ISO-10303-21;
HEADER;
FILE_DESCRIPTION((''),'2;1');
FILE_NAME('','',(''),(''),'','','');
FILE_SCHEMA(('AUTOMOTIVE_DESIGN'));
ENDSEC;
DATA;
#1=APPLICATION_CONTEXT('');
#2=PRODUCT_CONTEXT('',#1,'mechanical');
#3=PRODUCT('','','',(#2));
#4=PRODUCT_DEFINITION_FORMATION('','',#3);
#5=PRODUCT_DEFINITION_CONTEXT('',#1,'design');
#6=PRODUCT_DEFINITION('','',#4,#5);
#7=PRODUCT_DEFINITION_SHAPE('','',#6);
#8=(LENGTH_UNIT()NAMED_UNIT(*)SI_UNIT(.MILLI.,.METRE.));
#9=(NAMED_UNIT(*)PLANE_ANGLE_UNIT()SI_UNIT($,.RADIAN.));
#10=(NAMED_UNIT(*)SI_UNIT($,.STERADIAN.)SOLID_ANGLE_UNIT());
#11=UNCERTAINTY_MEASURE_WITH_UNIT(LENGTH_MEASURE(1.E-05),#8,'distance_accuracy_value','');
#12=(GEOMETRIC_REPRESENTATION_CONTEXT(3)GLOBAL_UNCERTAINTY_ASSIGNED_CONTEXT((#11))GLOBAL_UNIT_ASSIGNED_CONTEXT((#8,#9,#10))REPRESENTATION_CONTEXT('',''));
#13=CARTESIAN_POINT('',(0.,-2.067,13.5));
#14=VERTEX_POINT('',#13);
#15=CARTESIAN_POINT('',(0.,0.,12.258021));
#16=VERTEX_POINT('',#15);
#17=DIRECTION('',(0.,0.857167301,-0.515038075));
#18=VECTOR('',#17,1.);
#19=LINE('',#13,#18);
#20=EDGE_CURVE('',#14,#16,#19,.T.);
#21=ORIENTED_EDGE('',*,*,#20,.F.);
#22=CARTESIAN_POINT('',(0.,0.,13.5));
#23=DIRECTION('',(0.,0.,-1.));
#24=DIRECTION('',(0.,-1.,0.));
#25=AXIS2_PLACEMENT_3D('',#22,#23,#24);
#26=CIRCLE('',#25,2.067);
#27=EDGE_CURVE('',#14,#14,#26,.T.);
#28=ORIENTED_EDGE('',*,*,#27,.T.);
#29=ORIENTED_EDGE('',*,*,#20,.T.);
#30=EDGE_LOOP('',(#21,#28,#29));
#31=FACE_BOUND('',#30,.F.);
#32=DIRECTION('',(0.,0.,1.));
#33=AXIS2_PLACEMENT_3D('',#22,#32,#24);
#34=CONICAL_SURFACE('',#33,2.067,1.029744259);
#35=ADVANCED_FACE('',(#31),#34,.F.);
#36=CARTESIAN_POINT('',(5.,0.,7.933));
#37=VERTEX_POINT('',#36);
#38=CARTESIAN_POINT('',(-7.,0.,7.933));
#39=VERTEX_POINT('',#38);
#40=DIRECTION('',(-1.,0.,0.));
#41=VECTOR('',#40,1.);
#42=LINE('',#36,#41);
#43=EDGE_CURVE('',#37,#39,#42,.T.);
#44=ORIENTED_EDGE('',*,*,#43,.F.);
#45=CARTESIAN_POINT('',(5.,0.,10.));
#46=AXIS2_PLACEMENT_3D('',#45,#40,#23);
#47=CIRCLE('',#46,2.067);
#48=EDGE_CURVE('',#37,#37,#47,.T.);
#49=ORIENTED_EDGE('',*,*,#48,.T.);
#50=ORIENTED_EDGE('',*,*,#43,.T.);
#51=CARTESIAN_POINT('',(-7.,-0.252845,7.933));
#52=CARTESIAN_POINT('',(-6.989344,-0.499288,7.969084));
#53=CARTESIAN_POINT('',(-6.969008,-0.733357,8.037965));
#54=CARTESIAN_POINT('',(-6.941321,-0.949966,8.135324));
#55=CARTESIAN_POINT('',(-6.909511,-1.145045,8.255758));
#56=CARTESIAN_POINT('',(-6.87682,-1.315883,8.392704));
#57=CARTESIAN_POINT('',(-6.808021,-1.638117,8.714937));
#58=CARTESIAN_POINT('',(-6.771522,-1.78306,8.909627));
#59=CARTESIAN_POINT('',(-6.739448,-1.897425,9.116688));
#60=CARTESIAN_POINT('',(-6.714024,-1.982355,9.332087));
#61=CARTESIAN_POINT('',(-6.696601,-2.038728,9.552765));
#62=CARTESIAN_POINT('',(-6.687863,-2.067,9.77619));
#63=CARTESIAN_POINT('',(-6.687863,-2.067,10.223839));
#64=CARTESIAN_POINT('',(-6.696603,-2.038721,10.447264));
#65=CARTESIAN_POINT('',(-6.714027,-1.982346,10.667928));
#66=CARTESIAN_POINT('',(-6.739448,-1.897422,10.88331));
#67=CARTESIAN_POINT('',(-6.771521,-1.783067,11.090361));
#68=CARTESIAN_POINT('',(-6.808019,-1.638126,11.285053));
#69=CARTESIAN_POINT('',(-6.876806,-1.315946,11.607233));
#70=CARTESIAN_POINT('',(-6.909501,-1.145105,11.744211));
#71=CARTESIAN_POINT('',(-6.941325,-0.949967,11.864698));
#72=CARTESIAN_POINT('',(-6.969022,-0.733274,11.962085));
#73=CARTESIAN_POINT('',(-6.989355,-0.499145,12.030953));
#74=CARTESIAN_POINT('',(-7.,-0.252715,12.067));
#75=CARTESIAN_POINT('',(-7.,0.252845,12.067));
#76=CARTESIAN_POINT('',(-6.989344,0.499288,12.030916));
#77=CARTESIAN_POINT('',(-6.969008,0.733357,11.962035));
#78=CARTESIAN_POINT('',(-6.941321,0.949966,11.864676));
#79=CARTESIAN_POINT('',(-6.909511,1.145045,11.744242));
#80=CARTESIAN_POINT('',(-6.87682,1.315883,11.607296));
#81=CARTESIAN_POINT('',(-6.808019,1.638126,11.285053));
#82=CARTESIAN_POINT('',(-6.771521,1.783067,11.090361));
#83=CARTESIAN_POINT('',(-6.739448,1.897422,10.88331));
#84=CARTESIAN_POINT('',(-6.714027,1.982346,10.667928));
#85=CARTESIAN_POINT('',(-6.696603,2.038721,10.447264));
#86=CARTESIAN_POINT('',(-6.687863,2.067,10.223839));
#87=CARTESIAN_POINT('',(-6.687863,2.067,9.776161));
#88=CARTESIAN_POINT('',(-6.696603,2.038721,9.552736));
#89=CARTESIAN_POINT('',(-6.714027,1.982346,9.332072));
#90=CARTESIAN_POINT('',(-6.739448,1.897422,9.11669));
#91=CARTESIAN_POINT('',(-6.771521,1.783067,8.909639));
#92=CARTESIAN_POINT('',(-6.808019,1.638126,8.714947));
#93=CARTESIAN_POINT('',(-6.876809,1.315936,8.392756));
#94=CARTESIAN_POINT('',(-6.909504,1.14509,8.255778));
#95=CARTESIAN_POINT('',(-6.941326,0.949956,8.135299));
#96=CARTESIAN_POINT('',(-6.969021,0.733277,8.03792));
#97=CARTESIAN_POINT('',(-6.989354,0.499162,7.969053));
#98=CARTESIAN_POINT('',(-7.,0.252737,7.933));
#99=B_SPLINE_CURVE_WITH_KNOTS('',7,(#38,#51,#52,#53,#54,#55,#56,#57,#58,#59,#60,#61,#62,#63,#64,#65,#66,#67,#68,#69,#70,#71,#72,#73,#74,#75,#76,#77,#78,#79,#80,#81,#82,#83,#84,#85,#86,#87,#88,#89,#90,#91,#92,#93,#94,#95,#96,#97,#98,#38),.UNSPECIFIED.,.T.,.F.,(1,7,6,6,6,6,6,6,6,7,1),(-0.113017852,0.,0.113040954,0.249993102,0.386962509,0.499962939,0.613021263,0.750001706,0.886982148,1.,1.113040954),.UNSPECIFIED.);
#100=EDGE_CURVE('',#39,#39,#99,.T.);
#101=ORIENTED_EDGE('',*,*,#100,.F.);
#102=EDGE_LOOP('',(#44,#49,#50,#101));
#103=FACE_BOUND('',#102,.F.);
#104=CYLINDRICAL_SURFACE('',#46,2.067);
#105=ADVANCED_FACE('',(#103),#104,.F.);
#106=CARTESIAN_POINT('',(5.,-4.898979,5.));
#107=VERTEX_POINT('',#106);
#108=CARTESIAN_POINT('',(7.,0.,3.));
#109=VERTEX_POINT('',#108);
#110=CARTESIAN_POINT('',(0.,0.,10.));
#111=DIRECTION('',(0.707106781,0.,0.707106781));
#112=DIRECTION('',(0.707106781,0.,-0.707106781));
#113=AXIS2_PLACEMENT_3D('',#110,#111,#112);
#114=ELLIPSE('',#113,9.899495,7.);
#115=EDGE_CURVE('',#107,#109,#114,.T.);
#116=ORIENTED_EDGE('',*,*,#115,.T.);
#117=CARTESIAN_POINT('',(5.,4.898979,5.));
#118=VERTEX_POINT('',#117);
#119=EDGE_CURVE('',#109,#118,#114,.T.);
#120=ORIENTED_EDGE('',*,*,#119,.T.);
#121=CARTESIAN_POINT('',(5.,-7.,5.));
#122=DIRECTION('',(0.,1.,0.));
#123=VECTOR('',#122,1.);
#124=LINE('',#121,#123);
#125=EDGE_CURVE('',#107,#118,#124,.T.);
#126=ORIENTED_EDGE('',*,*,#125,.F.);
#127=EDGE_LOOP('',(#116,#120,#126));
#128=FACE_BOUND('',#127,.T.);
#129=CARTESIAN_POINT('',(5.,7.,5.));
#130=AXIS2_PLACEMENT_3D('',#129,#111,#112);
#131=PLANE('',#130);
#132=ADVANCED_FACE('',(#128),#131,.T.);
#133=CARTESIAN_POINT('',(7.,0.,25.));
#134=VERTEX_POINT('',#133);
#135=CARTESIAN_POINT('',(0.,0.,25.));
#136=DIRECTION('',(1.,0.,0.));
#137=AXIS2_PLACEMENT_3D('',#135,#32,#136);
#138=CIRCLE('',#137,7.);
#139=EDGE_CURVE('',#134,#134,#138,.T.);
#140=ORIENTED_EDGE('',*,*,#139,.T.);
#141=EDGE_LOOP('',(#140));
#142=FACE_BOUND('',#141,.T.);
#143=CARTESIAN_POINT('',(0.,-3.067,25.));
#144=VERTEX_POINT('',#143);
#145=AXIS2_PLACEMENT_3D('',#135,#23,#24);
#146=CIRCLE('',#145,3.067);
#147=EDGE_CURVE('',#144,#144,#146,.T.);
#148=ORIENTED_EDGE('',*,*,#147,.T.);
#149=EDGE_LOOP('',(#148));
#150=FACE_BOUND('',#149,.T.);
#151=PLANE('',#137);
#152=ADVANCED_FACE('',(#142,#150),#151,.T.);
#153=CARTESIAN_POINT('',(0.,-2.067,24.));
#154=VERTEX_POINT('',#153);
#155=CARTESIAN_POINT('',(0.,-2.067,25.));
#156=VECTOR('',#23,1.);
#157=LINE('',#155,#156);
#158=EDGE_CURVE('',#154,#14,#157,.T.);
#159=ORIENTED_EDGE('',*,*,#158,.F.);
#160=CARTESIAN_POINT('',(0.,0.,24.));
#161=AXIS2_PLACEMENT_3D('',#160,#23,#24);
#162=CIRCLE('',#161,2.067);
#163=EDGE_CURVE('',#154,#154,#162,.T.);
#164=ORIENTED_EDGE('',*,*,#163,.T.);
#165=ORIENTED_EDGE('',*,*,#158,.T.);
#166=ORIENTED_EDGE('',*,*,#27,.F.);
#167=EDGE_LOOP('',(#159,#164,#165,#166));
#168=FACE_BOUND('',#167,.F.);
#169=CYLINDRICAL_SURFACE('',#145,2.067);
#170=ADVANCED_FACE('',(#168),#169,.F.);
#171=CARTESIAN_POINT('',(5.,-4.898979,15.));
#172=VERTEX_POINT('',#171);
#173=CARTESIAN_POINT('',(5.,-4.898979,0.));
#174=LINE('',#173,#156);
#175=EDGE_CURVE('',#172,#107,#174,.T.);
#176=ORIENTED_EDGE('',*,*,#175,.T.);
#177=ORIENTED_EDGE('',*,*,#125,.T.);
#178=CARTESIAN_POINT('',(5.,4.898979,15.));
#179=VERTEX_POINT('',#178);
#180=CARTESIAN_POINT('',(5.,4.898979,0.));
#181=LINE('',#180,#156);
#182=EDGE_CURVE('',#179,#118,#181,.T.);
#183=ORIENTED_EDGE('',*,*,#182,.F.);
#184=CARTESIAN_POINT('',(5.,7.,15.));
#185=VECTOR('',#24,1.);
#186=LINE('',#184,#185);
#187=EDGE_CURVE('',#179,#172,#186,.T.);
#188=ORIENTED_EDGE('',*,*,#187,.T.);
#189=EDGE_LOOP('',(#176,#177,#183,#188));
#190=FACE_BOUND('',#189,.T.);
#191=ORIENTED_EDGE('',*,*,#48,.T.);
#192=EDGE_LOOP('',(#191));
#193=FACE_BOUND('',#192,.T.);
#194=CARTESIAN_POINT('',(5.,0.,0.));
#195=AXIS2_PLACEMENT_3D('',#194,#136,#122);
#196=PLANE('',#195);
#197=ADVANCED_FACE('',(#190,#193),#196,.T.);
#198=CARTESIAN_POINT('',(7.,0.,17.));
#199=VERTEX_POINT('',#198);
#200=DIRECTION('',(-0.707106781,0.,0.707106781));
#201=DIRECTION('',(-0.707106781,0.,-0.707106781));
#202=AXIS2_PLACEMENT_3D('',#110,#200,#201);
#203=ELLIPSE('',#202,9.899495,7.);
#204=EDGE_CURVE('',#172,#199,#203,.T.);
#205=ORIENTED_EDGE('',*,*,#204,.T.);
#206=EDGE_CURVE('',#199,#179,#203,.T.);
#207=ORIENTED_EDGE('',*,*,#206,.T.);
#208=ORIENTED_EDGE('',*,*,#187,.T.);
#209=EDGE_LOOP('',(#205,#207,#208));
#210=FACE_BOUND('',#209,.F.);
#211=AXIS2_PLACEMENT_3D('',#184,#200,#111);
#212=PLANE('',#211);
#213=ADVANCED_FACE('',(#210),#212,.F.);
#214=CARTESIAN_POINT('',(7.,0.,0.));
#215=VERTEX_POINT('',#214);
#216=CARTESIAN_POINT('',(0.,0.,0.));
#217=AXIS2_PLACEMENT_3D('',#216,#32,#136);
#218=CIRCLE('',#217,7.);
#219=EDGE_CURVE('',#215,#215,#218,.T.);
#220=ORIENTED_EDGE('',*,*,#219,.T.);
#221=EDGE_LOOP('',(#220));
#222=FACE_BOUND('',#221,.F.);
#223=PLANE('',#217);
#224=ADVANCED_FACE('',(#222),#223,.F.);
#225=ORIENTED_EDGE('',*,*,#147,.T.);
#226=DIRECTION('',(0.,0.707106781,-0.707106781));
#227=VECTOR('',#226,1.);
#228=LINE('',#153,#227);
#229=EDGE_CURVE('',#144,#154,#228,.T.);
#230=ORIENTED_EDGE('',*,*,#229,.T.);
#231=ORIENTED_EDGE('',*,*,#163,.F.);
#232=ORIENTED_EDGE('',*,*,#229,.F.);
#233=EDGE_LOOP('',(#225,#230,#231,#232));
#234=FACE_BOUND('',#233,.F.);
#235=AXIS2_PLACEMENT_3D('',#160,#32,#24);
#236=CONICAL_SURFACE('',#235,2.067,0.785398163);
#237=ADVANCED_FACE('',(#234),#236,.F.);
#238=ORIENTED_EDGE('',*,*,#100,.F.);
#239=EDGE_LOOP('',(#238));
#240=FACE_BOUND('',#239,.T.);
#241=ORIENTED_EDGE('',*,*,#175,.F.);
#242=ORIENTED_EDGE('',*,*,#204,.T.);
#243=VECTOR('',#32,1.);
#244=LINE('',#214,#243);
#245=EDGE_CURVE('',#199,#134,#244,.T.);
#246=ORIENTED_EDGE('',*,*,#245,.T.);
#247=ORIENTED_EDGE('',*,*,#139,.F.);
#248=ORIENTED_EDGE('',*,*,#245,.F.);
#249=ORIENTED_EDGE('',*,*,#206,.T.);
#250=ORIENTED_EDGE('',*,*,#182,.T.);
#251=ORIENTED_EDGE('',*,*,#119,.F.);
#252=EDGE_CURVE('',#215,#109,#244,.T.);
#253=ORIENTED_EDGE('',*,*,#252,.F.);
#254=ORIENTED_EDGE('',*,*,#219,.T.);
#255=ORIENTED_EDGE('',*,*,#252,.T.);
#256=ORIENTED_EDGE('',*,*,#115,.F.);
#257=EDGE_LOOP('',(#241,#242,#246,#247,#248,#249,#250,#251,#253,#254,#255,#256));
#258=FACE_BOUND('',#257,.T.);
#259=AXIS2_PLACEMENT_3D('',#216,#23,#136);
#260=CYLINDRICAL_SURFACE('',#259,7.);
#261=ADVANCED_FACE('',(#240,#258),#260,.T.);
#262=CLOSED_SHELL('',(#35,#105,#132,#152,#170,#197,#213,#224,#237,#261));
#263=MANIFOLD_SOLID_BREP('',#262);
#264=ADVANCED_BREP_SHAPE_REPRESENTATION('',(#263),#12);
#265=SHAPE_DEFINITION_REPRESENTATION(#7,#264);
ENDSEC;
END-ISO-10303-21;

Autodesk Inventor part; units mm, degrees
ref_plane "XY Plane" through (0, 0, 0) normal (0, 0, 1) x (1, 0, 0)
sketch "Skizze1" plane through (0, 0, 0) normal (0, 0, 1) x (1, 0, 0)
  circle A0 centre (0, 0) radius 7
  dimension "d0" = 14
extrude "Extrusion1" add sketch "Skizze1" along normal blind 25
sketch "Skizze2" plane through (0, 0, 25) normal (0, 0, 1) x (1, 0, 0)
  circle A0 centre (0, 0) radius 7 projected
hole "Bohrung1" at (0, 0, 25) direction (0, 0, -1) diameter 4.134 depth 11.5 tip angle 118 thread size "M5x0.8" class "6H" standard "ISO Metric profile"
chamfer "Fasen1" distance 1 angle 45 1 edges at (0, 2.067, 25)
ref_plane "Arbeitsebene1" through (-7, 0, 0) normal (1, 0, 0) x (0, 1, 0)
ref_plane "Arbeitsebene2" through (0, -7, 0) normal (0, 1, 0) x (-1, 0, 0)
ref_plane "Arbeitsebene3" through (7, 0, 0) normal (1, 0, 0) x (0, 1, 0)
sketch "Skizze6" plane through (7, 0, 0) normal (1, 0, 0) x (0, 1, 0)
  line L0 (-7, 0) -> (-7, 25) projected
  line L1 (7, 0) -> (7, 25) projected
  line L2 (-7, 5) -> (7, 5)
  line L3 (7, 5) -> (7, 15)
  line L4 (7, 15) -> (-7, 15)
  line L5 (-7, 15) -> (-7, 5)
  line L6 (7, 25) -> (-7, 25) projected
  point P0 (0, 0)
  point P1 (-7, 15)
  point P2 (7, 5)
  dimension "d29" = 10
  dimension "d30" = 10
extrude "Extrusion4" cut sketch "Skizze6" against normal blind 2 contours L0 L4 L1 L2
sketch "Skizze7" plane through (5, 0, 0) normal (1, 0, 0) x (0, 0, -1)
  line L0 (-5, -4.899) -> (-5, 4.899) projected
  line L1 (0, 7) -> (0, -7) projected
  point P0 (0, 0)
  point P1 (-10, 0)
  point P2 (0, 0)
  point P3 (0, 0)
  point P4 (0, 0)
  dimension "d33" = 5
hole "Bohrung3" at (5, 0, 10) direction (-1, 0, 0) diameter 4.134 end through all thread size "M5x0.8" class "6H" standard "ISO Metric profile"
ref_plane "Arbeitsebene4" through (0, 7, 0) normal (0, 1, 0) x (-1, 0, 0)
sketch "Skizze8" plane through (0, 7, 0) normal (0, 1, 0) x (-1, 0, 0)
  line L0 (-5, 5) -> (-5, 5) projected
  line L1 (-5, 7.933) -> (-5, 12.067) projected
  line L2 (-5, 5) -> (-5, 15) projected
  line L3 (-5, 15) -> (-5, 5) projected
  line L4 (-5, 15) -> (-7, 15) projected
  line L5 (-5, 15) -> (-5, 5) projected
  line L6 (-5, 5) -> (-5, 15) projected
  line L7 (-5, 15) -> (-5, 15) projected
  line L8 (-7, 5) -> (-5, 5) projected
  line L9 (-5, 5) -> (-7, 3)
  line L10 (-7, 0) -> (-7, 25) projected
  line L11 (-5, 5) -> (-2.1716, 5) construction
  line L12 (-7, 3) -> (-7, 5)
  line L13 (-5, 15) -> (-7, 17)
  line L14 (-5, 15) -> (-2.1716, 15) construction
  line L15 (-7, 17) -> (-7, 15)
  point P0 (0, 0)
  point P1 (-5, 24.433)
  point P2 (-5, 28.567)
  dimension "d42" = 135
  dimension "d43" = 135
extrude "Extrusion5" cut sketch "Skizze8" against normal through all contours L9 L10 L8 | L4 L10 L13
properties part number "TS_V1_Fallmagazin_Schieberanbindung_int"
